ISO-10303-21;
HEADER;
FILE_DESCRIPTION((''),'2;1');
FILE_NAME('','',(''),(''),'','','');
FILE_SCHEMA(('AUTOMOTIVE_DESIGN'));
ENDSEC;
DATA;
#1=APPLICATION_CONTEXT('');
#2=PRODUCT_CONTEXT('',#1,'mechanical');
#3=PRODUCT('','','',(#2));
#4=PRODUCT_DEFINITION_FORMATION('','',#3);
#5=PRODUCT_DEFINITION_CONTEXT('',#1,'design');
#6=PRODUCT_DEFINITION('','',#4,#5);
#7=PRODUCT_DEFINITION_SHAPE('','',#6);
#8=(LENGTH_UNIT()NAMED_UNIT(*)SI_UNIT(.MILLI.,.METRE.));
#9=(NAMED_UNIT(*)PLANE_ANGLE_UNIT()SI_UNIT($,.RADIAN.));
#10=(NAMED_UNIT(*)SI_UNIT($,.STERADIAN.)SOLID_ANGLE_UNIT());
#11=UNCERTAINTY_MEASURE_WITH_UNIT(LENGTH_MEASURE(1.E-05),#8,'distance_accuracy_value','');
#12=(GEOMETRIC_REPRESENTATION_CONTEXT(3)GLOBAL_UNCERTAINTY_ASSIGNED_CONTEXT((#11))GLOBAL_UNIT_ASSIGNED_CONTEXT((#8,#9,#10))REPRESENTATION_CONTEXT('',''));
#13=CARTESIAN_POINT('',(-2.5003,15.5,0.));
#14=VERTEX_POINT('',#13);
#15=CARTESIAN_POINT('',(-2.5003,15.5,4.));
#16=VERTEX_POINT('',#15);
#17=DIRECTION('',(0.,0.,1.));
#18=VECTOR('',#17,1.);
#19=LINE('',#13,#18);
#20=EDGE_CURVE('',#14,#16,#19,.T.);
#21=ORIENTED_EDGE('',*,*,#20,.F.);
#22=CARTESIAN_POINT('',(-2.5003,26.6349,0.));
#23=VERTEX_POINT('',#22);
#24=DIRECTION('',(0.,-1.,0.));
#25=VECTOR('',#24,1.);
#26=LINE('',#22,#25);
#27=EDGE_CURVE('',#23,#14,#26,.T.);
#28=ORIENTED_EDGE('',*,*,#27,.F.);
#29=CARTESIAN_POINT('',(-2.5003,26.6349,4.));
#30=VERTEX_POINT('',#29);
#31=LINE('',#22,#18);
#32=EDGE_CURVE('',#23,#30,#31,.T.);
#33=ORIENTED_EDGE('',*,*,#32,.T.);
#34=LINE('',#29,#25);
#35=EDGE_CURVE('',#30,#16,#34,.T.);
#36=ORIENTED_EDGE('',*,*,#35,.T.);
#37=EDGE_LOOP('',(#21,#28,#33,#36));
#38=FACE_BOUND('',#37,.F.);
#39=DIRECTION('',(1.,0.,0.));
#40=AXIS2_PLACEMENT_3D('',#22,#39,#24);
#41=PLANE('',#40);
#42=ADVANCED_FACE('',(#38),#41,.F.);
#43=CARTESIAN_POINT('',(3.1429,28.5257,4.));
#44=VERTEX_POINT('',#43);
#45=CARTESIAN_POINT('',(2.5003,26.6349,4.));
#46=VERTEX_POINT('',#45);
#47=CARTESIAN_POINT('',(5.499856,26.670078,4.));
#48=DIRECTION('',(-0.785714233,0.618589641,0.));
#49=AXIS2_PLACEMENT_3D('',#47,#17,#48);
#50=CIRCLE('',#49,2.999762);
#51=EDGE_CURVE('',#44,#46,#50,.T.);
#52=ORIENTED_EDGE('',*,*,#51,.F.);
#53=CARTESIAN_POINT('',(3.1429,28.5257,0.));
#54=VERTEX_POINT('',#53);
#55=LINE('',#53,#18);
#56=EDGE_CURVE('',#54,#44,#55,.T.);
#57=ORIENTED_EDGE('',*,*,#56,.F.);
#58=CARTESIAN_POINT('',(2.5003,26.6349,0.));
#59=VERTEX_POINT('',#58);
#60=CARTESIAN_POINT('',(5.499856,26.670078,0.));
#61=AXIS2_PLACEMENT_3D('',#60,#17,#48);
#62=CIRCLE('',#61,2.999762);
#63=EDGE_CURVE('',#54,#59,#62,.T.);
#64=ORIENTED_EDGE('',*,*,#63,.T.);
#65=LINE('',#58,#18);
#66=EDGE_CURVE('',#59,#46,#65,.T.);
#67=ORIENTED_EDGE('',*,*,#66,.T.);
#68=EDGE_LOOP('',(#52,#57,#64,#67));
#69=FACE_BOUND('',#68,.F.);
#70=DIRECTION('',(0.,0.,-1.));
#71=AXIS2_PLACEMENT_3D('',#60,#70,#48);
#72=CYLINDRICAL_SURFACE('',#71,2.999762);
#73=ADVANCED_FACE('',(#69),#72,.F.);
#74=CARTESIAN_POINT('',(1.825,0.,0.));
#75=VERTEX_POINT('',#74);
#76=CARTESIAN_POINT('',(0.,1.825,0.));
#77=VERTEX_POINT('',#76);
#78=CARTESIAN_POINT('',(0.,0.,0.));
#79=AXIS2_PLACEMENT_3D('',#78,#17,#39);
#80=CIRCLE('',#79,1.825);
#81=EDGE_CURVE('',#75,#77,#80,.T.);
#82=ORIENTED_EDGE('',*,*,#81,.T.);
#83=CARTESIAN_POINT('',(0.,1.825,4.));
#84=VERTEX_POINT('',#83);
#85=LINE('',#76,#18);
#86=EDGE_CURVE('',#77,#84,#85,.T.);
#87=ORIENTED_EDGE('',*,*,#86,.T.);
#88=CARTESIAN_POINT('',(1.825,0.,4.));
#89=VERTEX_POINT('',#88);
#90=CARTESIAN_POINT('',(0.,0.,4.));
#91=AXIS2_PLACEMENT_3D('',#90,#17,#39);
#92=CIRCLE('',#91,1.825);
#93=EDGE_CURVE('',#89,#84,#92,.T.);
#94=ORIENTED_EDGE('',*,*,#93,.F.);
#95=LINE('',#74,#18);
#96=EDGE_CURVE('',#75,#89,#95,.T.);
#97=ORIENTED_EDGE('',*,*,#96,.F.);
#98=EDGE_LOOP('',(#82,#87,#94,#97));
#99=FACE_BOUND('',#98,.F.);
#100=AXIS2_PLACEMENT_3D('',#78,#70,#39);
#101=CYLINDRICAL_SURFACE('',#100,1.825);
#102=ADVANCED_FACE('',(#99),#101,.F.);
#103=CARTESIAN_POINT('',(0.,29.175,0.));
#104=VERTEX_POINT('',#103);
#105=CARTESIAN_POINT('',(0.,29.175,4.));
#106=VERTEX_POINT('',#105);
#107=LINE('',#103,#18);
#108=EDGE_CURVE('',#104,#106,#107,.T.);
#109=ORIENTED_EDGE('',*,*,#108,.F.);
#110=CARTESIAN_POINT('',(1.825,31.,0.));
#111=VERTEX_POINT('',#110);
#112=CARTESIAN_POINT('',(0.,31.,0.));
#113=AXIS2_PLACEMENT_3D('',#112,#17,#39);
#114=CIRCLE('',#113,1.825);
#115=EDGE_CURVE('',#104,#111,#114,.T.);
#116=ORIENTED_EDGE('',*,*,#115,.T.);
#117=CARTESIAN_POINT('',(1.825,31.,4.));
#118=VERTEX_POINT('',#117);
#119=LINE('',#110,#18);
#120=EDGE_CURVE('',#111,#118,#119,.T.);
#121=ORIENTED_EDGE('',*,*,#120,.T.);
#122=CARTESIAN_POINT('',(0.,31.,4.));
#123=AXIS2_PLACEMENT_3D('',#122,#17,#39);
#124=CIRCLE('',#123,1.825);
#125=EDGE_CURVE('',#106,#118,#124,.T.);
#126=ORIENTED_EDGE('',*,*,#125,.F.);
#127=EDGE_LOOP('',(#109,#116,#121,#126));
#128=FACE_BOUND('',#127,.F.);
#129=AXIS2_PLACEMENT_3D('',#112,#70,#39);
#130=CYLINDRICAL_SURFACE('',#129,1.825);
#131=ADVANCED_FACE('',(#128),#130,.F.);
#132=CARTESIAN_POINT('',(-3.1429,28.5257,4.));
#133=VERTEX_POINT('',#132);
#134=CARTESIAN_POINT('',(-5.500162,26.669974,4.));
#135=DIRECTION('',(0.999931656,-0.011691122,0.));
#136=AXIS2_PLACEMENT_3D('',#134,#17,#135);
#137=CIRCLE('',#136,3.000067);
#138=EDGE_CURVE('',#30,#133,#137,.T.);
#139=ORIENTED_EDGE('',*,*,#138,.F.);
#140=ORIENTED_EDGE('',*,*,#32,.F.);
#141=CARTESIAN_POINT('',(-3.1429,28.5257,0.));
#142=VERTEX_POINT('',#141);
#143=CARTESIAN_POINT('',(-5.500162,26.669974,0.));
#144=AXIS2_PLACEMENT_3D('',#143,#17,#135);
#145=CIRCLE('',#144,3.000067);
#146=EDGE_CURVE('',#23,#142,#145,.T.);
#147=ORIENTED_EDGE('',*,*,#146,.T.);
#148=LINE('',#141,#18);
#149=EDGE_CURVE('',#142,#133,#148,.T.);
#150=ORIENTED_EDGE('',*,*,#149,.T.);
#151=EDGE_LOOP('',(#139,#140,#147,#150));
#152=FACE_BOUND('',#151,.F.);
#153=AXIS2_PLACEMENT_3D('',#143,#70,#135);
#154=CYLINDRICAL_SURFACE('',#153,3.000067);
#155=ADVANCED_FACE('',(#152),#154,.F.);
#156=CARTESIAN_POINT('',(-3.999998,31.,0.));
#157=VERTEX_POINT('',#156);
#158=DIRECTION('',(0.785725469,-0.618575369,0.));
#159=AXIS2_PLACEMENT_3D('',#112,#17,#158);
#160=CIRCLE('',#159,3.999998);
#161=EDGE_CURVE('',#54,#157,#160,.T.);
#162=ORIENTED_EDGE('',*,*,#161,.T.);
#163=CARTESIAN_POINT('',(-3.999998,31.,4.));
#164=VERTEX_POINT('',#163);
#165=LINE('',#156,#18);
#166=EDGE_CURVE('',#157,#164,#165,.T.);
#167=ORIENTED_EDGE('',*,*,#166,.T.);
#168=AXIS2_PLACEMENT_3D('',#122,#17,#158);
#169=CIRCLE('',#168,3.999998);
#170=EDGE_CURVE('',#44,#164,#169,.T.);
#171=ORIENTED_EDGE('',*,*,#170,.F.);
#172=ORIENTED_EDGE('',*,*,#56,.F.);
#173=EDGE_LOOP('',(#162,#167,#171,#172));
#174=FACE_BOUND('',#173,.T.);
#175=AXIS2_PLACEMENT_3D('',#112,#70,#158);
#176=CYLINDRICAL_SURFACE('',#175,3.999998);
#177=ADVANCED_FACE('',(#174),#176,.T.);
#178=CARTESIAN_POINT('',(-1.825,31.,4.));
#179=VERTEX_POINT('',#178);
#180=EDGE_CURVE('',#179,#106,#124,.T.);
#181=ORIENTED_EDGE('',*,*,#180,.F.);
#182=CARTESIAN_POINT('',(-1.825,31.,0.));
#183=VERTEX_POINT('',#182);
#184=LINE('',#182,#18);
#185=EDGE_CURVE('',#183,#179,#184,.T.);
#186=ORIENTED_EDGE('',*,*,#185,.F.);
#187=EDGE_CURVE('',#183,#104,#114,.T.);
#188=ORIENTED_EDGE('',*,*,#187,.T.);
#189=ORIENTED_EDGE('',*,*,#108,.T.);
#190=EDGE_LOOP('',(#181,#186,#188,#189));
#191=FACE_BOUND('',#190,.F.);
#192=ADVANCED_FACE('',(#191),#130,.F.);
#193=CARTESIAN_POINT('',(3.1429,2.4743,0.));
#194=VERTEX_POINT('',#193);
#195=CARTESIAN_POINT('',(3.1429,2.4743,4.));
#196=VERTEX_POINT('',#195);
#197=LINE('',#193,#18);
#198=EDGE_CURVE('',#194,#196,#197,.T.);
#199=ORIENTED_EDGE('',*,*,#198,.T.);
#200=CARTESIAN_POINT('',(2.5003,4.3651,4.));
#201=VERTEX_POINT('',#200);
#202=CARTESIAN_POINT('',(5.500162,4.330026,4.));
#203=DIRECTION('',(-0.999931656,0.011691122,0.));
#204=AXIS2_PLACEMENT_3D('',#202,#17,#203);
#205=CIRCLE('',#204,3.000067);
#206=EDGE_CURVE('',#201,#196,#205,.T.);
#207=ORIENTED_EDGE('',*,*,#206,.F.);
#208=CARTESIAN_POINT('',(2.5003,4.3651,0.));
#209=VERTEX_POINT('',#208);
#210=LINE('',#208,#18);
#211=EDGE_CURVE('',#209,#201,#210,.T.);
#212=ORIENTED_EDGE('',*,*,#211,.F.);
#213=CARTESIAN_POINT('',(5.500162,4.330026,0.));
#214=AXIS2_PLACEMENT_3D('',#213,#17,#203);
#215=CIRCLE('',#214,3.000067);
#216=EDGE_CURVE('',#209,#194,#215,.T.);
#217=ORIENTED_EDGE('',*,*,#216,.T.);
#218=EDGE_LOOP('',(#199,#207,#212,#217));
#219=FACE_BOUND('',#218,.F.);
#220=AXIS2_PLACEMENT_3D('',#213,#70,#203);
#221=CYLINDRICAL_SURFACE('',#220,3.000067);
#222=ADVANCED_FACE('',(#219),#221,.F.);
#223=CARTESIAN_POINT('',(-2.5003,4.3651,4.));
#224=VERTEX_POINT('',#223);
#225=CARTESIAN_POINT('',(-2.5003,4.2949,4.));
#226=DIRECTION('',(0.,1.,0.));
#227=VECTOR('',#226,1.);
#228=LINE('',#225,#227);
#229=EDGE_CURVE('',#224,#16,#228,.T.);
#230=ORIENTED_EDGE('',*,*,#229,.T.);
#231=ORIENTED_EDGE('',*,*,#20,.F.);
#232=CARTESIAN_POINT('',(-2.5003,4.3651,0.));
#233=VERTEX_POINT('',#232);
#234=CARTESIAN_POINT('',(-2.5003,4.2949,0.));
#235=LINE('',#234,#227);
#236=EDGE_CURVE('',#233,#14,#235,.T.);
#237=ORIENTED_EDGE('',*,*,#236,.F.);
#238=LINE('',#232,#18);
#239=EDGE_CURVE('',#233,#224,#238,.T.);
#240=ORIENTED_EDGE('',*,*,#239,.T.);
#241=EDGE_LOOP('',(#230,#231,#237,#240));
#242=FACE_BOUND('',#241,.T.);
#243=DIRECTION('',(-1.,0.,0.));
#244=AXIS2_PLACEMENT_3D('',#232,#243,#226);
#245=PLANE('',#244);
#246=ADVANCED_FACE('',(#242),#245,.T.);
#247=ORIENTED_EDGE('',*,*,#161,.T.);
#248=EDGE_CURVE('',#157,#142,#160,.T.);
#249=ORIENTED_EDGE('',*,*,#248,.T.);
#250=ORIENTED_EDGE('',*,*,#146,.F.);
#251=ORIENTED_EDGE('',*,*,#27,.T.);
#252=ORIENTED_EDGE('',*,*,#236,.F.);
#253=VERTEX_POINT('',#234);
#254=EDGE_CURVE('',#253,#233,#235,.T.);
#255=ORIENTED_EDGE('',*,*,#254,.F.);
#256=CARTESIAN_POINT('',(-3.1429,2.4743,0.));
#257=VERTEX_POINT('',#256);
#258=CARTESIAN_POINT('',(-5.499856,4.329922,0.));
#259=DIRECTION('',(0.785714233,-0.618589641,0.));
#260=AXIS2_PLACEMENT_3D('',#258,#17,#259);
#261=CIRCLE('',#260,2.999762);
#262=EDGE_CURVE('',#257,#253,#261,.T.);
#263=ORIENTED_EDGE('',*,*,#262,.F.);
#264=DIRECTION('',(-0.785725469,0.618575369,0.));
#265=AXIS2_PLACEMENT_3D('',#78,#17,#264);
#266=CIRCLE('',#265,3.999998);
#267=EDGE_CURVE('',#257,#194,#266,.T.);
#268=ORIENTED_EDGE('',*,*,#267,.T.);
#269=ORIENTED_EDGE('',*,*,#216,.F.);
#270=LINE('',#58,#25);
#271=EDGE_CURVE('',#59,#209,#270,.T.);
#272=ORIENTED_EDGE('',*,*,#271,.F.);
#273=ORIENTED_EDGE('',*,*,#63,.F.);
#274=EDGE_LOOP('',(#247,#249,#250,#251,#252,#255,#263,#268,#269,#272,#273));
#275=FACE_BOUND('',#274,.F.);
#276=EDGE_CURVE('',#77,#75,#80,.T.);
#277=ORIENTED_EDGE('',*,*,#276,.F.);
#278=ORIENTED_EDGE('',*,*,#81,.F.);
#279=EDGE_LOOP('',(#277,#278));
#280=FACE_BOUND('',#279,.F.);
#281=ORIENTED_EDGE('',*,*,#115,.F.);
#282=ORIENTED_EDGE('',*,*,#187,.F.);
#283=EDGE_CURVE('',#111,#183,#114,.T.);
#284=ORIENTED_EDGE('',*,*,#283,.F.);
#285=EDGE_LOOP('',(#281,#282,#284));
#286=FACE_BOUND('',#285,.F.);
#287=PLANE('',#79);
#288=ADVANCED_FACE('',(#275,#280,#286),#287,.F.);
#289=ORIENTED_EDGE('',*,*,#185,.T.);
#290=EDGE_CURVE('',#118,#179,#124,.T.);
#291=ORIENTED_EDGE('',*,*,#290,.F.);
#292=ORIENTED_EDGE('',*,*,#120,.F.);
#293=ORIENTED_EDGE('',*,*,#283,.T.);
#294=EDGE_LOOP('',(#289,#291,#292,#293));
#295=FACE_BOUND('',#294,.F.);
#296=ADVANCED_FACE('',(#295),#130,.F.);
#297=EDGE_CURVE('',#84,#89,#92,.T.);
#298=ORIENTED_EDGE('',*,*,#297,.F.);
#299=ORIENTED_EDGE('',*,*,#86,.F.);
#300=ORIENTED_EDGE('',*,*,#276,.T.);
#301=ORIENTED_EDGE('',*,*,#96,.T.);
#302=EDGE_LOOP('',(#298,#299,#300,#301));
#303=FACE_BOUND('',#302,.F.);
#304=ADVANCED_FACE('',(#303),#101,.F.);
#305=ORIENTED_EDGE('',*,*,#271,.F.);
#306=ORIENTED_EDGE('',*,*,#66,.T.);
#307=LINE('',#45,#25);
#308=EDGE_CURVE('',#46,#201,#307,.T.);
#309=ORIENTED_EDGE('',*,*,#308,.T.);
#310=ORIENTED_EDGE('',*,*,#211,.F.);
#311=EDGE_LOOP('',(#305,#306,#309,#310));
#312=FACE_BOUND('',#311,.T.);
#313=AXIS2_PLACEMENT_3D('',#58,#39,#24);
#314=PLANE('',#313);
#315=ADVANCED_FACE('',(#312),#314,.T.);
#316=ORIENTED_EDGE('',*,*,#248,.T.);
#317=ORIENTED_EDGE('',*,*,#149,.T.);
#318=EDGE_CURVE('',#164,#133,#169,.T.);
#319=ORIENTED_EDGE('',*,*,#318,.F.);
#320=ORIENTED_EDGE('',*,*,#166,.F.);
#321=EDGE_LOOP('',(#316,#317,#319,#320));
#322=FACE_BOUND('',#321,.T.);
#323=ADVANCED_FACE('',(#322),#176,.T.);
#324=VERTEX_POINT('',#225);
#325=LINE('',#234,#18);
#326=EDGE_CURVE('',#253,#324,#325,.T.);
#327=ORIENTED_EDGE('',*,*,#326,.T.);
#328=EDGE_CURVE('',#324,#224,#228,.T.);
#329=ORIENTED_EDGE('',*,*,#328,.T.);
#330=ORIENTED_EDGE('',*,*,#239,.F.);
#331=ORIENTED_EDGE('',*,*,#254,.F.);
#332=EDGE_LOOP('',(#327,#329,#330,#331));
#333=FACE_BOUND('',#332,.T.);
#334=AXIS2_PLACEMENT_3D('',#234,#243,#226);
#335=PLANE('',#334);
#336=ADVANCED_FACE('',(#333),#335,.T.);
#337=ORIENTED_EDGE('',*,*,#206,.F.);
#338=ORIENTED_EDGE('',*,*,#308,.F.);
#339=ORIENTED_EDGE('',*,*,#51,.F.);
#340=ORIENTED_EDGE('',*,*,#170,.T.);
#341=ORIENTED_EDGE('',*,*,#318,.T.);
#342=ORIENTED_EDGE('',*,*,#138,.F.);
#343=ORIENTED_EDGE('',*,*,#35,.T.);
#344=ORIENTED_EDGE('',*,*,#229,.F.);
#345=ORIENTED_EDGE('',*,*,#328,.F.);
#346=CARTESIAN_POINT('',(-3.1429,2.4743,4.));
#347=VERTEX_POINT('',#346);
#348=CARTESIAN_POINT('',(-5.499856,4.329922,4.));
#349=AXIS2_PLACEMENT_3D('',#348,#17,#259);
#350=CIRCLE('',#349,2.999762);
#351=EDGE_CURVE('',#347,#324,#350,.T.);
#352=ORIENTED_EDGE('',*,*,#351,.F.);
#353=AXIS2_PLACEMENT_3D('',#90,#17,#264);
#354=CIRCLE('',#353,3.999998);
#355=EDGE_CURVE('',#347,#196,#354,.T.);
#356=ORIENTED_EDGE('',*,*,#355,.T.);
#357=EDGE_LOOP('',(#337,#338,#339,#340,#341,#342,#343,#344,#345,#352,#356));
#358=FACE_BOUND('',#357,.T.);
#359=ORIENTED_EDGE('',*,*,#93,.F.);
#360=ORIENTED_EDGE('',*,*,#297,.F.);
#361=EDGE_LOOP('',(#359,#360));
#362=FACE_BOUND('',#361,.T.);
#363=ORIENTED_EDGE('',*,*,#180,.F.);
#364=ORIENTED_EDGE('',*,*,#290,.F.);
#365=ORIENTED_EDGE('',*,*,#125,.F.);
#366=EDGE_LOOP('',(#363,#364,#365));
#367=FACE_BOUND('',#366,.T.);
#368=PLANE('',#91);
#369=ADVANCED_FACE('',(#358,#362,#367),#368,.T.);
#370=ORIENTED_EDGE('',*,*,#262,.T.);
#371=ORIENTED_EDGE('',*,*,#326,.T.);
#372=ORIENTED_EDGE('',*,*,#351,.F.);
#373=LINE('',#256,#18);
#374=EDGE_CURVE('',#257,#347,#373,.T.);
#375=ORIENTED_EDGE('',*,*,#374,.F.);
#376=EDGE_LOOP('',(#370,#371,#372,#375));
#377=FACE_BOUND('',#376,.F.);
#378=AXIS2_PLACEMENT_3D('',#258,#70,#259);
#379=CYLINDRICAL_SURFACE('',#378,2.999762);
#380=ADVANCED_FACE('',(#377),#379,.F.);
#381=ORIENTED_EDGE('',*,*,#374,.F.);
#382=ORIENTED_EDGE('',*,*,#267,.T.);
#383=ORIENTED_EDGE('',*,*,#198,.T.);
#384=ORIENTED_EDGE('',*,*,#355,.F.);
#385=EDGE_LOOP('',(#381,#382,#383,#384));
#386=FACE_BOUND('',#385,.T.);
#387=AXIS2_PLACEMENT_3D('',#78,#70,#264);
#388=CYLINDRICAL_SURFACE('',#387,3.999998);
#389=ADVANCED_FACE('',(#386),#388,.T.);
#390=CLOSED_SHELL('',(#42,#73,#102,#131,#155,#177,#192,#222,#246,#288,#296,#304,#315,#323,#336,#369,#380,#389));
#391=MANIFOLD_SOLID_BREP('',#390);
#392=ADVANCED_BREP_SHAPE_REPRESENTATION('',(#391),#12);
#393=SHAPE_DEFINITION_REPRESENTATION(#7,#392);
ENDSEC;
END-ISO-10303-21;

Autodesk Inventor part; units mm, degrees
ref_plane "YZ Plane" through (0, 0, 0) normal (1, 0, 0) x (0, 1, 0)
ref_plane "XZ Plane" through (0, 0, 0) normal (0, 1, 0) x (-1, 0, 0)
ref_plane "XY Plane" through (0, 0, 0) normal (0, 0, 1) x (1, 0, 0)
sketch "Náčrt1" plane through (0, 0, 0) normal (0, 0, 1) x (1, 0, 0)
  line L0 (0, 0) -> (0, 31)
  circle A0 centre (0, 31) radius 1.825
  circle A1 centre (0, 0) radius 1.825
  arc A2 (3.1429, 28.5257) -> (-3.1429, 28.5257) centre (0, 31) ccw
  arc A3 (-3.1429, 2.4743) -> (3.1429, 2.4743) centre (0, 0) ccw
  line L1 (0, 31) -> (-5.5, 31)
  line L2 (-5.5, 31) -> (-5.5, 26.67)
  arc A4 (-2.5003, 26.6349) -> (-3.1429, 28.5257) centre (-5.5, 26.67) ccw
  line L3 (-2.5003, 4.2949) -> (-2.5003, 15.5)
  arc A5 (3.1429, 28.5257) -> (2.5003, 26.6349) centre (5.5, 26.67) ccw
  arc A6 (-3.1429, 2.4743) -> (-2.5003, 4.3651) centre (-5.5, 4.33) ccw
  arc A7 (2.5003, 4.3651) -> (3.1429, 2.4743) centre (5.5, 4.33) ccw
  line L4 (2.5003, 26.6349) -> (2.5003, 4.3651)
  line L5 (-2.5003, 26.6349) -> (-2.5003, 15.5)
  dimension "d0" = 31
  dimension "d1" = 3.65
  dimension "d2" = 3.65
  dimension "d3" = 8
  dimension "d4" = 8
  dimension "d7" = 5.5
  dimension "d8" = 4.33
extrude "Vysunutí1" add sketch "Náčrt1" along normal blind 4
properties part number "spojka" material "ABS Plastic"
